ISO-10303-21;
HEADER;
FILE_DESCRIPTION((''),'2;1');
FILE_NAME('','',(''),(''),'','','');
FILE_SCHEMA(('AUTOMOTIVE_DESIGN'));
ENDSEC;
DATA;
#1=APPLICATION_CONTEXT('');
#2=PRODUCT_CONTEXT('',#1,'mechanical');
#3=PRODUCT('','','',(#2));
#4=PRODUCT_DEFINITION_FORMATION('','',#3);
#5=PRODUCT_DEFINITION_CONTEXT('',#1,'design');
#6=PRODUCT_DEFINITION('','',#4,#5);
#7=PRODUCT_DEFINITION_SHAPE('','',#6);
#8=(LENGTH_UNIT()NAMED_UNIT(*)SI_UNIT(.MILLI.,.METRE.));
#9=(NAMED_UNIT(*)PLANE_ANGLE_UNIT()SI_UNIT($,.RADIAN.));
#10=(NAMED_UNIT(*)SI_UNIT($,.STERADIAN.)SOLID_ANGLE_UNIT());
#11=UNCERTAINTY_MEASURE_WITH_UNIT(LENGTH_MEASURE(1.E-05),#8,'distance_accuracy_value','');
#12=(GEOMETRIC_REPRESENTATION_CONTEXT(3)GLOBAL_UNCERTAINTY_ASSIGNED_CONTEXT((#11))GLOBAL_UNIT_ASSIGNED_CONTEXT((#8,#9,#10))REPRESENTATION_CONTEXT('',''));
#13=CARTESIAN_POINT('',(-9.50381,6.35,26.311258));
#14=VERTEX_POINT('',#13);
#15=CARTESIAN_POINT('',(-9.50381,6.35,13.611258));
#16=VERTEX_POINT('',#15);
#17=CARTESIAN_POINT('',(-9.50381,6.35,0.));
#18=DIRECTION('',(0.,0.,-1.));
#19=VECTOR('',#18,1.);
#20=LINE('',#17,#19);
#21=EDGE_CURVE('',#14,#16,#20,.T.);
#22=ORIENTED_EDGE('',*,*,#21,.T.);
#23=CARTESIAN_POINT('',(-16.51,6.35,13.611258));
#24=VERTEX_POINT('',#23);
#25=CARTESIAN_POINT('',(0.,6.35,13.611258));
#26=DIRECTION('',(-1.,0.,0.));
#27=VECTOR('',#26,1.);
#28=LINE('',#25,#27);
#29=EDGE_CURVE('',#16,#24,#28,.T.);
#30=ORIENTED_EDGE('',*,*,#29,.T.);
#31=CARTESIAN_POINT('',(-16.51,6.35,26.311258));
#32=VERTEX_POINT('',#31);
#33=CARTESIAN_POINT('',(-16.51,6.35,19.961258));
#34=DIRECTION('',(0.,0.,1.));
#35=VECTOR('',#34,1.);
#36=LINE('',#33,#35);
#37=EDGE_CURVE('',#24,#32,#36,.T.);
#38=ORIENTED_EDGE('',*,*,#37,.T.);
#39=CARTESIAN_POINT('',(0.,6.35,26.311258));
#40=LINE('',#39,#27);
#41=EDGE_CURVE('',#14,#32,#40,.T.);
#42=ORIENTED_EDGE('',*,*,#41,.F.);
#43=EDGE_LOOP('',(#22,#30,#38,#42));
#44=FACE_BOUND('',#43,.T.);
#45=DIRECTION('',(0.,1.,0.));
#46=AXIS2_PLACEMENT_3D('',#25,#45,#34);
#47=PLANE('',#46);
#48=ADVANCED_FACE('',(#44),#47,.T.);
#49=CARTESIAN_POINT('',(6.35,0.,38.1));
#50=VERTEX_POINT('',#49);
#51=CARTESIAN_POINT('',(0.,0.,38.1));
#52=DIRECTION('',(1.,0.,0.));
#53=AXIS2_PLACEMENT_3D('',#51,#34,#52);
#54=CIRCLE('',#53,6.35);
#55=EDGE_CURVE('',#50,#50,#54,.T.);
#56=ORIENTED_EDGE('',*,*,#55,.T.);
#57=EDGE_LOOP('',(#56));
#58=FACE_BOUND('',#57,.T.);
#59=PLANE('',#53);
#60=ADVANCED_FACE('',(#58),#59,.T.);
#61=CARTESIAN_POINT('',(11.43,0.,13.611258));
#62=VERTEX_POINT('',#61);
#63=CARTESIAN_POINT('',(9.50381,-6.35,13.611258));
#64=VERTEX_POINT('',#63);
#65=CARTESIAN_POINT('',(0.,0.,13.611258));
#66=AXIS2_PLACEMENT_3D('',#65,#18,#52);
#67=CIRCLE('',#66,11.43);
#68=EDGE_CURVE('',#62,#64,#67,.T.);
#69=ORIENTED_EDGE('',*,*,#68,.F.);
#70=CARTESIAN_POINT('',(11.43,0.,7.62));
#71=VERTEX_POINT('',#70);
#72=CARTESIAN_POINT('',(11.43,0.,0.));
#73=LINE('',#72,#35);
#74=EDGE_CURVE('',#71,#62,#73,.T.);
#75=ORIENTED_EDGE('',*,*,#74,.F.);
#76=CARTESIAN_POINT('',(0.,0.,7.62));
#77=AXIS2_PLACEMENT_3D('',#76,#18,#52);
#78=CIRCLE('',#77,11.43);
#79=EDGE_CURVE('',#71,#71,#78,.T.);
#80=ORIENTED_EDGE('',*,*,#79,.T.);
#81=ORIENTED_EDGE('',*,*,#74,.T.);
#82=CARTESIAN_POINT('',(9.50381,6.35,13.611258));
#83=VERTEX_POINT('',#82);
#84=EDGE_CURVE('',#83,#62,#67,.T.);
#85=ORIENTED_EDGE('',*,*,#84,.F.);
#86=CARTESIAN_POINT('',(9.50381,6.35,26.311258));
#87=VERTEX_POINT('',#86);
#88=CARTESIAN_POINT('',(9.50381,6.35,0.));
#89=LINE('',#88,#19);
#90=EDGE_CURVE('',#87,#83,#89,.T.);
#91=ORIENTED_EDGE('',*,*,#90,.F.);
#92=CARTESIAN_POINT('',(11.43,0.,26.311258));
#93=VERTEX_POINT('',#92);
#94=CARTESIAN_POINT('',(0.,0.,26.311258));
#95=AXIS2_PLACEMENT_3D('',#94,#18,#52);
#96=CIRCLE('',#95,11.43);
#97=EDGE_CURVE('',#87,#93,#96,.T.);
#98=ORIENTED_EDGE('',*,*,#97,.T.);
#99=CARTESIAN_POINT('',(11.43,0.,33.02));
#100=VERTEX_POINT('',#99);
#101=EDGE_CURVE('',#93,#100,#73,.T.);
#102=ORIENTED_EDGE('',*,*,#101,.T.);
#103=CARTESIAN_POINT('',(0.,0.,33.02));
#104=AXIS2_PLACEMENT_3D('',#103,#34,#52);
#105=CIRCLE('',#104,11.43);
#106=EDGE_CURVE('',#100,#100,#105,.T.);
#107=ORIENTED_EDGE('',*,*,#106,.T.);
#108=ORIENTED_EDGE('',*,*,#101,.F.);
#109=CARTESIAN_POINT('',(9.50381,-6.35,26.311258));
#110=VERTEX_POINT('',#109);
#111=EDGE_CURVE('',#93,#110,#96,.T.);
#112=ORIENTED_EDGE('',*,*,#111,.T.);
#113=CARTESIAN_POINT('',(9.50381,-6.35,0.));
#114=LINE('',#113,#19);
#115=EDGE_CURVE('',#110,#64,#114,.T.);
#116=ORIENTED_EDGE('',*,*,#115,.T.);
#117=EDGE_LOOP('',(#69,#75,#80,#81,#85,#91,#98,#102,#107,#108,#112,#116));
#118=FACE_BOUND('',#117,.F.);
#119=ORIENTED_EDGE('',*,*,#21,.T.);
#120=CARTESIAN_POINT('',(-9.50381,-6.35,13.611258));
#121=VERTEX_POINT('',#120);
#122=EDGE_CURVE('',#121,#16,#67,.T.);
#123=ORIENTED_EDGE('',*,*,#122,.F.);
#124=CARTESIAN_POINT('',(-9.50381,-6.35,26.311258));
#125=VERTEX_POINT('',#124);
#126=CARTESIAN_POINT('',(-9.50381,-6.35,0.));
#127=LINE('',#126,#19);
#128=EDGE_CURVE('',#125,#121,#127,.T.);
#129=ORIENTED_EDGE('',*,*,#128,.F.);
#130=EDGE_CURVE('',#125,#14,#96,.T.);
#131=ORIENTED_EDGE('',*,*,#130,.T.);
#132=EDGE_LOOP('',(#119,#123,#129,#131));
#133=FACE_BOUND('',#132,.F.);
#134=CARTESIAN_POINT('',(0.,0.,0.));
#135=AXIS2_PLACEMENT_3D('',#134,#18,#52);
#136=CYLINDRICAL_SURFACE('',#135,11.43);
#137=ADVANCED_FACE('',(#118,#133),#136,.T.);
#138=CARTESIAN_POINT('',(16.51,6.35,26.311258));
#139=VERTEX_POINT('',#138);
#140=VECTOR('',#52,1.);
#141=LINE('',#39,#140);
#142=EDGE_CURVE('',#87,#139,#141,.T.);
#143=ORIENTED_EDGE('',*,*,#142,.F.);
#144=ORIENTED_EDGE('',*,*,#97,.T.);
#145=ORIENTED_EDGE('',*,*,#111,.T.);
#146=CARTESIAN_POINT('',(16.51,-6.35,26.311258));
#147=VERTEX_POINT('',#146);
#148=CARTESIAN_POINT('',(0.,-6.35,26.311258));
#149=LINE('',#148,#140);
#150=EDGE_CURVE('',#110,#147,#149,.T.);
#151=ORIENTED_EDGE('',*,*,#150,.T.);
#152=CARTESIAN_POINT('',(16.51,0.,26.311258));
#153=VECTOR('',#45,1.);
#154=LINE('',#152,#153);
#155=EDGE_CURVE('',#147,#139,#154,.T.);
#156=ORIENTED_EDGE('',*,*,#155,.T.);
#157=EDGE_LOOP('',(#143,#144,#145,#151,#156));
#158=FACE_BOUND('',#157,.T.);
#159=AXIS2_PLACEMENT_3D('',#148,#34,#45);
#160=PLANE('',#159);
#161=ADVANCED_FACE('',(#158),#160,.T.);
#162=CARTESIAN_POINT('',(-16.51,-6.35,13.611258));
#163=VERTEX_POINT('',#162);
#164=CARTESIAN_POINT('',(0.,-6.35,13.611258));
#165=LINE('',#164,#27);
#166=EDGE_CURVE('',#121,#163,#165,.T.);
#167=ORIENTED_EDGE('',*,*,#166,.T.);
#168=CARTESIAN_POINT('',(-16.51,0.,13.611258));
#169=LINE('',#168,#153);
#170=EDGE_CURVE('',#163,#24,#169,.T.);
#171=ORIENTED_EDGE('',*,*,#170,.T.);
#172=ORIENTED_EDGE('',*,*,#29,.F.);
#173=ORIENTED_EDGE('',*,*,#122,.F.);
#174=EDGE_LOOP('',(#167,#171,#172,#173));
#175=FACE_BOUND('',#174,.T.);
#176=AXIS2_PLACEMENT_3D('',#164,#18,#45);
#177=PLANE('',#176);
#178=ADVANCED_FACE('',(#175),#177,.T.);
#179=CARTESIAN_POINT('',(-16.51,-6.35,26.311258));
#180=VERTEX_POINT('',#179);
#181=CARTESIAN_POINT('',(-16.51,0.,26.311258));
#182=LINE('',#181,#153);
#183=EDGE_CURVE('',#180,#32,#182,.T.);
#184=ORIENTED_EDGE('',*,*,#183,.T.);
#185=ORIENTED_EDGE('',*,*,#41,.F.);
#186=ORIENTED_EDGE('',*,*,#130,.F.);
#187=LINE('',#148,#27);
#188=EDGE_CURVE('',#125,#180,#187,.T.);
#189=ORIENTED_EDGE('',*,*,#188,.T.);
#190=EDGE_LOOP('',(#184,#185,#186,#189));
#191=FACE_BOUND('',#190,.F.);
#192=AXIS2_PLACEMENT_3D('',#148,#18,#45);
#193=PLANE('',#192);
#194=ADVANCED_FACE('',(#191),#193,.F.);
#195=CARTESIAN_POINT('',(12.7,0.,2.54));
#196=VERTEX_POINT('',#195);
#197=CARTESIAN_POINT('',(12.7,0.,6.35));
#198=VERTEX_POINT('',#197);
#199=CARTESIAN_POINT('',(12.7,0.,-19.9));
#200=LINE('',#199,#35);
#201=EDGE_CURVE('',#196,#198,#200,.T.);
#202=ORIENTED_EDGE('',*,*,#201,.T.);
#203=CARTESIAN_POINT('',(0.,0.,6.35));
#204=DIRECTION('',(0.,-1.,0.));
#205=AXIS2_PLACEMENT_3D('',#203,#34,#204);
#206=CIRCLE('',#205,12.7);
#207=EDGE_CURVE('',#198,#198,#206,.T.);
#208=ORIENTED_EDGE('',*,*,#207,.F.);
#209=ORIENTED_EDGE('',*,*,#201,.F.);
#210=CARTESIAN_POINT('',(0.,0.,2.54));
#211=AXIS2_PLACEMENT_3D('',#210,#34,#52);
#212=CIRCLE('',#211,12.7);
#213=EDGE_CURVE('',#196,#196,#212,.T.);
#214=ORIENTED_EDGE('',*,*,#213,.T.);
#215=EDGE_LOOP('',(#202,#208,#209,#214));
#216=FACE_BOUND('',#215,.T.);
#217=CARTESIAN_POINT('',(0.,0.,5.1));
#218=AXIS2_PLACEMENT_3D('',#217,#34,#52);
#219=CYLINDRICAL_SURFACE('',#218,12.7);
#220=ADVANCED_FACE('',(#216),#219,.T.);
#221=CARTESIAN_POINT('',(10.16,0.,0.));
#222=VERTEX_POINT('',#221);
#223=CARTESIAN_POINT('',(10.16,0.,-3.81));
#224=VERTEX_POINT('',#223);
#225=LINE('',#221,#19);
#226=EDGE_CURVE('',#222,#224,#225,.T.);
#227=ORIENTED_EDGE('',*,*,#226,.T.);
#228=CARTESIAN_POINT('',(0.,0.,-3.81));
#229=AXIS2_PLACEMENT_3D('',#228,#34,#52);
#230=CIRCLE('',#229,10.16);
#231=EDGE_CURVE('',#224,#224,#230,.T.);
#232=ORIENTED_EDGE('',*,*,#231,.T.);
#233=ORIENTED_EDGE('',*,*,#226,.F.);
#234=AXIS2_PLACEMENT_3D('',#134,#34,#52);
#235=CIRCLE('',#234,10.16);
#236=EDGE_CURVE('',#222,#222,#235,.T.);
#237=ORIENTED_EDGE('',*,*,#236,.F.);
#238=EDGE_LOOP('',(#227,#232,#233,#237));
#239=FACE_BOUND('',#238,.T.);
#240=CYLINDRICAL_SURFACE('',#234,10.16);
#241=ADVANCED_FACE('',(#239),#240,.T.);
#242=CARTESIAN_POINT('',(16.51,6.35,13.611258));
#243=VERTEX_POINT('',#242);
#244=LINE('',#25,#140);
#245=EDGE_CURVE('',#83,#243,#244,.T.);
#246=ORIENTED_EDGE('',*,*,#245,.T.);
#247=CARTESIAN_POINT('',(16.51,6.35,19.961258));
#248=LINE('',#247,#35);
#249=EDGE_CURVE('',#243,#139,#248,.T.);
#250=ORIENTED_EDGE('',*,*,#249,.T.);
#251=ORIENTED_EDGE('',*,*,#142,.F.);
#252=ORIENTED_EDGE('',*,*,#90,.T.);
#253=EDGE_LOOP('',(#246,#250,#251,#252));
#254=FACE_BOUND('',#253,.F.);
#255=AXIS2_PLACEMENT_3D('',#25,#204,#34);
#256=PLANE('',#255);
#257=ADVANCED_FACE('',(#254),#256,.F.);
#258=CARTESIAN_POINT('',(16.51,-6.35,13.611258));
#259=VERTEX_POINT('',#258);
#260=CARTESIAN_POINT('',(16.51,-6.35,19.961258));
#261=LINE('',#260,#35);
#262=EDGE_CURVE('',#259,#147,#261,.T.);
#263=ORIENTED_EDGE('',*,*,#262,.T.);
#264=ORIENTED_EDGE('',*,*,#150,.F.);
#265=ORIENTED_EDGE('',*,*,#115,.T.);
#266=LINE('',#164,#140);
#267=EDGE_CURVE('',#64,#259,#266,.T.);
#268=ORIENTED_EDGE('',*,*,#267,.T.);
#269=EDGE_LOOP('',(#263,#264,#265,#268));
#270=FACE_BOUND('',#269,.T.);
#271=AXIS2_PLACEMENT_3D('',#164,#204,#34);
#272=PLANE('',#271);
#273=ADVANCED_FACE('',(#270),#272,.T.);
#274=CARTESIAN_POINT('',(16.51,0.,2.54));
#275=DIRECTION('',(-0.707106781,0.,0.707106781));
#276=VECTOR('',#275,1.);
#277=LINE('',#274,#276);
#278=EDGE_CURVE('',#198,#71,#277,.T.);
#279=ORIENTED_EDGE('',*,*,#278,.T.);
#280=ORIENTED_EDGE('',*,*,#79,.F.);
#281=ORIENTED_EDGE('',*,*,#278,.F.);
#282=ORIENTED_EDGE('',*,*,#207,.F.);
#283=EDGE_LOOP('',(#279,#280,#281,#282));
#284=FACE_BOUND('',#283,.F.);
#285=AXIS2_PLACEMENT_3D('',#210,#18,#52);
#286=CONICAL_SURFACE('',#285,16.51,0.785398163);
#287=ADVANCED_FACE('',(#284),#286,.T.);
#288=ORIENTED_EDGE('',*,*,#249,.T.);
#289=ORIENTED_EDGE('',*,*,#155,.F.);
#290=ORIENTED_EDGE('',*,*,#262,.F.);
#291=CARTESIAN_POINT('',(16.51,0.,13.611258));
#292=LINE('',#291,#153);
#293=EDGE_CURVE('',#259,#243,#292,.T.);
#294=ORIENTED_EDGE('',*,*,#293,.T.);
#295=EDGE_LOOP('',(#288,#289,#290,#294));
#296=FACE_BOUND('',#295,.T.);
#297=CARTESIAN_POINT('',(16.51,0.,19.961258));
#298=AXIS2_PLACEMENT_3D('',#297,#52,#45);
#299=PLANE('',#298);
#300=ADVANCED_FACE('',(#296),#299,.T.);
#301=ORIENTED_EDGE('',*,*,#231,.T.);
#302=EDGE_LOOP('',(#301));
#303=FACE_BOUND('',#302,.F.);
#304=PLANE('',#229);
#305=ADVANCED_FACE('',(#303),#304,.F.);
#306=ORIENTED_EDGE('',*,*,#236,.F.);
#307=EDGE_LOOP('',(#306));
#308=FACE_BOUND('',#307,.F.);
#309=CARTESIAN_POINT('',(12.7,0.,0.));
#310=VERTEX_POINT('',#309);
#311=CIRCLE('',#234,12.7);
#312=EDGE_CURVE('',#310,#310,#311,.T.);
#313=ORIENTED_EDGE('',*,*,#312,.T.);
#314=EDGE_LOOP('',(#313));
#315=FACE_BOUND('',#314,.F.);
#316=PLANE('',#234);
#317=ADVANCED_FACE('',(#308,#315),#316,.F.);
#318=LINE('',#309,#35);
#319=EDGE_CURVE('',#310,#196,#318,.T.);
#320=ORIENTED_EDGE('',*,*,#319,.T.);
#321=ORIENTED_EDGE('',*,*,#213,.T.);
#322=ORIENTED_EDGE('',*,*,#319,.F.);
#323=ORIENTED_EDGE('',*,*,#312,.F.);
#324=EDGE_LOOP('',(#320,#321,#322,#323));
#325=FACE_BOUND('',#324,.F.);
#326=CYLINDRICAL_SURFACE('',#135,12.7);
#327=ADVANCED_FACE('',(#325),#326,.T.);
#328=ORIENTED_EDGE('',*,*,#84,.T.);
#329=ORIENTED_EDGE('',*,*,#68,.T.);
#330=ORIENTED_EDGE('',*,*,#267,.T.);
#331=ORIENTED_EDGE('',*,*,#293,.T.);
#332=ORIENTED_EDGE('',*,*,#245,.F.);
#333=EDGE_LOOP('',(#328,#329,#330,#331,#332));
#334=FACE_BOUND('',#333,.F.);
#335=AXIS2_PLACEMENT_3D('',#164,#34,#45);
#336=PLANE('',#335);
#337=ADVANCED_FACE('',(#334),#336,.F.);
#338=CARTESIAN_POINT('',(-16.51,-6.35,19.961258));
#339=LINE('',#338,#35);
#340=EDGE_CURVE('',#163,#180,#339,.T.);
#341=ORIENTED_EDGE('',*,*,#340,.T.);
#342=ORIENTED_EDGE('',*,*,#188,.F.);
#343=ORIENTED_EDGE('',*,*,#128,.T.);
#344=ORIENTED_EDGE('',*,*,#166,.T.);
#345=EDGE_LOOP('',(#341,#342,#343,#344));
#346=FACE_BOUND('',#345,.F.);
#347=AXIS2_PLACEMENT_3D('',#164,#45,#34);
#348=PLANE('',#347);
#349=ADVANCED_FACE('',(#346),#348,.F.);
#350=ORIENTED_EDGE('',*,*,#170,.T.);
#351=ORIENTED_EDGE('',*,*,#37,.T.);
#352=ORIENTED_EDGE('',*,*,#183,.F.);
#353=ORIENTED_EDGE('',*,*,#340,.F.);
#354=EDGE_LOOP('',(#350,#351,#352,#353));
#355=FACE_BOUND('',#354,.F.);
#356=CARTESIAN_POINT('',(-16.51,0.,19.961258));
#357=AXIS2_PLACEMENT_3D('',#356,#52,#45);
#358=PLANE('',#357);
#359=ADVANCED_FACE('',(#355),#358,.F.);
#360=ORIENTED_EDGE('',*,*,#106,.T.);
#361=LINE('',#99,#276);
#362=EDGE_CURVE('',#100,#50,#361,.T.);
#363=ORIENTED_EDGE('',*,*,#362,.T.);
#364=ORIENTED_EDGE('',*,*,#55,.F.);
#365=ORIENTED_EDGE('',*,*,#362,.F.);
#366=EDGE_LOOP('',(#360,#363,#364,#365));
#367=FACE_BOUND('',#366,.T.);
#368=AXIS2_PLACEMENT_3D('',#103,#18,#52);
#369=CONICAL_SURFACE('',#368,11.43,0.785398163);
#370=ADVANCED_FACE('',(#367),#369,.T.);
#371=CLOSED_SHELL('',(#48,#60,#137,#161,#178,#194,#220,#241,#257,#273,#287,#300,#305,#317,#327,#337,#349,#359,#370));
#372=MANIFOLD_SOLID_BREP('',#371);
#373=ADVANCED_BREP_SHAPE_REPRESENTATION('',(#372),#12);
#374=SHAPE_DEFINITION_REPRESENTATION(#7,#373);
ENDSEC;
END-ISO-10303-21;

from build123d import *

# Parameters (mm, degrees)
F0_R        = 10.16
F1_DEPTH    = 3.81
F2_R        = 12.7
F3_DEPTH    = 2.54
F4_R        = 11.43
F5_DEPTH    = 38.1
F6_S5_R     = 12.7
F6_T6_DEPTH = 25
F7_W        = 12.7
F7_H        = 12.7
F8_DEPTH    = 16.51
F9_W        = 12.7
F9_H        = 12.7
F10_DEPTH   = 16.51


# Not quite as in the source:
# - a fillet or chamfer that OpenCascade refuses, or shapes differently, is made with other operations: its cross-section is extruded or revolved along the edge and cut away or added


with BuildPart() as f1:
    # F0 (on Top) → F1 (new body)
    with BuildSketch(Plane.XY):
        Circle(F0_R)
    extrude(amount=-F1_DEPTH)

    # F2 (on Top) → F3 (join)
    with BuildSketch(Plane.XY):
        Circle(F2_R)
    extrude(amount=F3_DEPTH)

    # F4 (on Top) → F5 (join)
    with BuildSketch(Plane.XY):
        Circle(F4_R)
    extrude(amount=F5_DEPTH)

    # F6: chamfer of 5.08 on 3 edges, made by hand


with BuildPart() as f6_tool2:
    # F6_s3 → F6_t4 (revolve)
    with BuildSketch(Plane.XZ):
        Polygon((16.51, 2.54), (11.43, 7.62), (11.43, 2.54), align=None)
    revolve(axis=Axis((0, 0, 2.54), (0, 0, -1)))

    # F6_s5 → F6_t6 (intersect, symmetric)
    with BuildSketch(Plane.XY.offset(5.1)):
        Circle(F6_S5_R)
    extrude(amount=F6_T6_DEPTH, both=True, mode=Mode.INTERSECT)


with BuildPart() as f1_1:
    add(f1.part)

    # F6_t1: union F6_tool2
    add(f6_tool2.part)

    # F6_s7 → F6_t8 (revolve, cut)
    with BuildSketch(Plane.XZ):
        Polygon((11.43, 33.02), (6.35, 38.1), (11.43, 38.1), align=None)
    revolve(axis=Axis((0, 0, 38.1), (0, 0, 1)), mode=Mode.SUBTRACT)

    # F7 (on Right) → F8 (join)
    with BuildSketch(Plane.YZ):
        with Locations((0, 19.9612583965)):
            Rectangle(F7_W, F7_H)
    extrude(amount=F8_DEPTH)

    # F9 (on Right) → F10 (join)
    with BuildSketch(Plane.YZ):
        with Locations((0, 19.9612583965)):
            Rectangle(F9_W, F9_H)
    extrude(amount=-F10_DEPTH)


solid = f1_1.part
